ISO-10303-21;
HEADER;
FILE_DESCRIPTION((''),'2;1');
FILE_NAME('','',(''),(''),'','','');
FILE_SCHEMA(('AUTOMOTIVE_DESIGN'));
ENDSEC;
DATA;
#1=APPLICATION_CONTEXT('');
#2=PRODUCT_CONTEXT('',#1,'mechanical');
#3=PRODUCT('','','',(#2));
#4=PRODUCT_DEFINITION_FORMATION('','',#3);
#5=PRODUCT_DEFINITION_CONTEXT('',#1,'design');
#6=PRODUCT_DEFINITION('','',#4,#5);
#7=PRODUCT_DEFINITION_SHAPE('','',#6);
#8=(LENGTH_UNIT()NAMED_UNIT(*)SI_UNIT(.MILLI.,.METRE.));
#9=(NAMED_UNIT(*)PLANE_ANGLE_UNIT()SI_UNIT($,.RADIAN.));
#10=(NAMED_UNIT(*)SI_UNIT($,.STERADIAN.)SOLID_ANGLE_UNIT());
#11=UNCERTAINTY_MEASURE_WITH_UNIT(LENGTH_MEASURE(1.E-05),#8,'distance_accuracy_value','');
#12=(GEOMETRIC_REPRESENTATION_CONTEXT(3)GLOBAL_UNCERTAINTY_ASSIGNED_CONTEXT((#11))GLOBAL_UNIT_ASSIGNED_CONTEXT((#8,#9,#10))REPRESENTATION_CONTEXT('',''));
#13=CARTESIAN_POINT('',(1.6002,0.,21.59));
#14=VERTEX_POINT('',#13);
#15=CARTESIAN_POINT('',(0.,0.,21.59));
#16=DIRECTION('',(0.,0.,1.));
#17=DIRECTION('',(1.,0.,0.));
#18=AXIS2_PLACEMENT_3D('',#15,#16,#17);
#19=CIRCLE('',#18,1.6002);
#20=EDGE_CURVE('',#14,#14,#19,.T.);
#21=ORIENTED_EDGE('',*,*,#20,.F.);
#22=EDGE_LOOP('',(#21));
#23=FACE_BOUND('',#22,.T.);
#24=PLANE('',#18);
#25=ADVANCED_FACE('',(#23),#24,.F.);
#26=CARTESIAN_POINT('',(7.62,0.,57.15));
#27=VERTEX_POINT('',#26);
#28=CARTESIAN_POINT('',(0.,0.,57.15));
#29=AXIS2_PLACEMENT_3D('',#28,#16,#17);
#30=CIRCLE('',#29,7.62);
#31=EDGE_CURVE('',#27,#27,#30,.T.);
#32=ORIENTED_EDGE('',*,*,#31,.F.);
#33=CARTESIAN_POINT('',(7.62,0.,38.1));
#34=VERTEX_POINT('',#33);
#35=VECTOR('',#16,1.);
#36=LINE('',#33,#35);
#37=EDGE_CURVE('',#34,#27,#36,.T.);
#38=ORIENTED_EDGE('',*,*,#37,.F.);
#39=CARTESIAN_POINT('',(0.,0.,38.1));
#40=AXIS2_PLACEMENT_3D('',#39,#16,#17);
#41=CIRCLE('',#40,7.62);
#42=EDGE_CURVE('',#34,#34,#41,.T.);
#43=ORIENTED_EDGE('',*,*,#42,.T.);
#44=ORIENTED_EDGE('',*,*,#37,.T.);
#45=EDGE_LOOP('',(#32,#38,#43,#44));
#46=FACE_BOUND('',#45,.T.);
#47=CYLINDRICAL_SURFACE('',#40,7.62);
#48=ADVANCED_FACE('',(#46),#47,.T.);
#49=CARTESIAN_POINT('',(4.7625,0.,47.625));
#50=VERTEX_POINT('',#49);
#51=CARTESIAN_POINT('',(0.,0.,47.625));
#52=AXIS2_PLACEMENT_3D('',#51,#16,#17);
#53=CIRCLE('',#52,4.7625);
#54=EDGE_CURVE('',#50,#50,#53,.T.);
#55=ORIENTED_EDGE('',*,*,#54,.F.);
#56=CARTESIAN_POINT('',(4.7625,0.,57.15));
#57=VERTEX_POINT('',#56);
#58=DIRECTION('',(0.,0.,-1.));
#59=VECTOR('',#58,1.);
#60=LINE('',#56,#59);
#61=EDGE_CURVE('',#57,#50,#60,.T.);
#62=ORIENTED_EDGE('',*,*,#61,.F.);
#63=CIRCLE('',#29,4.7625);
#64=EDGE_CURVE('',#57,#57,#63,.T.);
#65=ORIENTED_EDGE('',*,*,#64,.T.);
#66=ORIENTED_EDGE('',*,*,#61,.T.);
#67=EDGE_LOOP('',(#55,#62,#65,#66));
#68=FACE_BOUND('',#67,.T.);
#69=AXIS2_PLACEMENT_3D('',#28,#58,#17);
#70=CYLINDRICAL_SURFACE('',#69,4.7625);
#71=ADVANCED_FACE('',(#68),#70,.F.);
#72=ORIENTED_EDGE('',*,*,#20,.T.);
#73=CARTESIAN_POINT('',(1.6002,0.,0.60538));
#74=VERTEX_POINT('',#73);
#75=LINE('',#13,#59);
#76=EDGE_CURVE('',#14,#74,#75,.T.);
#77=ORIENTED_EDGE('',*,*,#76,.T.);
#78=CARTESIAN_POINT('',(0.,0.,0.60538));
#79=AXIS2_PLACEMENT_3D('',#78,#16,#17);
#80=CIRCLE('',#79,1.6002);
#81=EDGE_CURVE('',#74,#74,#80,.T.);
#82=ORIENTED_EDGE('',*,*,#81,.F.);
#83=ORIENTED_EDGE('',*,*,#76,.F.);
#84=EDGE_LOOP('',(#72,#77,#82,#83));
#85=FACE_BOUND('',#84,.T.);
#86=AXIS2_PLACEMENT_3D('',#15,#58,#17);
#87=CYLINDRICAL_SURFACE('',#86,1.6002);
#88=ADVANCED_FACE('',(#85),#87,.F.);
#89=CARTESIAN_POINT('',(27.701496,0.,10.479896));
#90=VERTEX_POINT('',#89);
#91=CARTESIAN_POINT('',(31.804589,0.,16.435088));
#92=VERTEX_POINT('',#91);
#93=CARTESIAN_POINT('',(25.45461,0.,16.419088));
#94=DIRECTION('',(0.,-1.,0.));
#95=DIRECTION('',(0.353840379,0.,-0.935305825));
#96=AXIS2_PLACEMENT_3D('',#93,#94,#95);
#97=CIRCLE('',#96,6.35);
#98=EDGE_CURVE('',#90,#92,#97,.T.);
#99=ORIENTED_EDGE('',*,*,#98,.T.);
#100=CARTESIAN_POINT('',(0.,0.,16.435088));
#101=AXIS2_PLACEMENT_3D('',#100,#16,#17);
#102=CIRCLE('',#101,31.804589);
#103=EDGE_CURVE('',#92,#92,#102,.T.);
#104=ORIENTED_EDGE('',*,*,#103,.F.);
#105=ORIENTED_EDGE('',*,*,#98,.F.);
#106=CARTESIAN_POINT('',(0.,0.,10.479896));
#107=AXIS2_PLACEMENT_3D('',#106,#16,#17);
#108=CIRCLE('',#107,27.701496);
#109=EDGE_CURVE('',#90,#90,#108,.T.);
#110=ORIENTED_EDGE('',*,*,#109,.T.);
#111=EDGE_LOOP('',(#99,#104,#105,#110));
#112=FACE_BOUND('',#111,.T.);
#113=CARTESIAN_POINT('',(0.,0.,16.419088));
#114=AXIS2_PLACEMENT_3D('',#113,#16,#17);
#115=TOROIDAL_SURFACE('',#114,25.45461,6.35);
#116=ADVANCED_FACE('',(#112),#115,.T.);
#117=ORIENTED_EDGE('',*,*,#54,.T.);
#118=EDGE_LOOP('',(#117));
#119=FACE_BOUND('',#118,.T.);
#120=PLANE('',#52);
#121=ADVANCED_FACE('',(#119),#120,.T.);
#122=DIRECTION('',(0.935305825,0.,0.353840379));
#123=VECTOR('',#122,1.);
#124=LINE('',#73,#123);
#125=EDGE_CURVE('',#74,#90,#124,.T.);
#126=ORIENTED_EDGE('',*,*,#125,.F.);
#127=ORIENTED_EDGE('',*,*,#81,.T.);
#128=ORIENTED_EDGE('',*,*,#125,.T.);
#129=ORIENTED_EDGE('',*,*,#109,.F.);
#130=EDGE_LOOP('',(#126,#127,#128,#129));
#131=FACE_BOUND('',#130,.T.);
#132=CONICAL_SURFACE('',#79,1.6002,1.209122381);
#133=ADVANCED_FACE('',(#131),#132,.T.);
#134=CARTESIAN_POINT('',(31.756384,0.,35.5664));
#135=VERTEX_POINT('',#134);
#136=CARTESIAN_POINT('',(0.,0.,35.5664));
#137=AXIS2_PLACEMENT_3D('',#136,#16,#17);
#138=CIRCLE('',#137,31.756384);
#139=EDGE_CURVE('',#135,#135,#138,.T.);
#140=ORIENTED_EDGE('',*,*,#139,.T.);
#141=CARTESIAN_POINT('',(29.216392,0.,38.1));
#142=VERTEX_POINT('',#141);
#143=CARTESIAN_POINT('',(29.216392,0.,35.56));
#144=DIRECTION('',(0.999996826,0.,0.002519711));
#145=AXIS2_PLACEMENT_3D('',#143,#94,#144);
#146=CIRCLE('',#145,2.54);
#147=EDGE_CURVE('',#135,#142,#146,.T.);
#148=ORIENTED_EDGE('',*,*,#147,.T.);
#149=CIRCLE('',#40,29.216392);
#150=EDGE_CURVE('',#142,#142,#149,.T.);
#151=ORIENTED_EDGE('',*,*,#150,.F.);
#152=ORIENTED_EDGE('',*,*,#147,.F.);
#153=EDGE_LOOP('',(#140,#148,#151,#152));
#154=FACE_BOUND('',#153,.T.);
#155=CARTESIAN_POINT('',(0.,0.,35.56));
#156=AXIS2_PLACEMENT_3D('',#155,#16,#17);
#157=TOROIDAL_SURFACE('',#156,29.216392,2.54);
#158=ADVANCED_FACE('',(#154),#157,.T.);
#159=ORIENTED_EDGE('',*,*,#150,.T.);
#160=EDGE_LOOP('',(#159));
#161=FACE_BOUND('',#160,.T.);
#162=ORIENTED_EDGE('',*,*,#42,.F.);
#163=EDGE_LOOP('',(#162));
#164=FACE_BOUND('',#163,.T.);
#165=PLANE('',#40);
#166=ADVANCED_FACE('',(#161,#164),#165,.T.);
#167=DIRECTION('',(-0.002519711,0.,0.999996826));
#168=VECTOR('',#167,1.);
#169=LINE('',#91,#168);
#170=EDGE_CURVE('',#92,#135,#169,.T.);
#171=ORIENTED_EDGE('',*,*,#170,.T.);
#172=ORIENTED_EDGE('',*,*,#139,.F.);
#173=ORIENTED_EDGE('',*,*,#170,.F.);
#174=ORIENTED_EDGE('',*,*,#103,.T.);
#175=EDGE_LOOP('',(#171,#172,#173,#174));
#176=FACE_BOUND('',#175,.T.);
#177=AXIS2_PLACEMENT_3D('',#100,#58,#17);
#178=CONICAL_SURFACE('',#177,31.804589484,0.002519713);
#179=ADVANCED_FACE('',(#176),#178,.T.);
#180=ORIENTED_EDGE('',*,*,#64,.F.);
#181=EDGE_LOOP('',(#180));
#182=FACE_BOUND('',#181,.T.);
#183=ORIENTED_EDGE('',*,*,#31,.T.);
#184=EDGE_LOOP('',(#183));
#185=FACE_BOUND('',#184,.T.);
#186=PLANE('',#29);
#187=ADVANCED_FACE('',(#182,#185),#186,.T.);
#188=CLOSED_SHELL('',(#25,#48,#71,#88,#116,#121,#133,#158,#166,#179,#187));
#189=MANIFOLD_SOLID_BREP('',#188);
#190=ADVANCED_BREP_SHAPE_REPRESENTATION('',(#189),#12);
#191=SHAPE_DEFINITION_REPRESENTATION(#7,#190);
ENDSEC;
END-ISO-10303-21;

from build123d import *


# Not quite as in the source:
# - a feature names something its author has since deleted; it is built from what else it names


with BuildPart() as f1:
    # F0 (on Front) → F1 (revolve)
    with BuildSketch(Plane.XZ):
        with BuildLine():
            Line((0, 47.625), (0, 21.59))
            Line((0, 21.59), (1.6002, 21.59))
            Line((1.6002, 21.59), (1.6002, 0.6053799298))
            Line((1.6002, 0.6053799298), (27.7014960486, 10.4798960957))
            ThreePointArc((27.7014960486, 10.4798960957), (30.6836253917, 12.8163260486), (31.8045894836, 16.435088247))
            Line((31.8045894836, 16.435088247), (31.7563839592, 35.5664000652))
            ThreePointArc((31.7563839592, 35.5664000652), (31.0101790546, 37.3583125654), (29.2163920223, 38.1))
            Line((29.2163920223, 38.1), (7.62, 38.1))
            Line((7.62, 38.1), (7.62, 57.15))
            Line((7.62, 57.15), (4.7625, 57.15))
            Line((4.7625, 57.15), (4.7625, 47.625))
            Line((4.7625, 47.625), (0, 47.625))
        make_face()
    revolve(axis=Axis((0, 0, 28.575), (0, 0, 1)))


solid = f1.part
